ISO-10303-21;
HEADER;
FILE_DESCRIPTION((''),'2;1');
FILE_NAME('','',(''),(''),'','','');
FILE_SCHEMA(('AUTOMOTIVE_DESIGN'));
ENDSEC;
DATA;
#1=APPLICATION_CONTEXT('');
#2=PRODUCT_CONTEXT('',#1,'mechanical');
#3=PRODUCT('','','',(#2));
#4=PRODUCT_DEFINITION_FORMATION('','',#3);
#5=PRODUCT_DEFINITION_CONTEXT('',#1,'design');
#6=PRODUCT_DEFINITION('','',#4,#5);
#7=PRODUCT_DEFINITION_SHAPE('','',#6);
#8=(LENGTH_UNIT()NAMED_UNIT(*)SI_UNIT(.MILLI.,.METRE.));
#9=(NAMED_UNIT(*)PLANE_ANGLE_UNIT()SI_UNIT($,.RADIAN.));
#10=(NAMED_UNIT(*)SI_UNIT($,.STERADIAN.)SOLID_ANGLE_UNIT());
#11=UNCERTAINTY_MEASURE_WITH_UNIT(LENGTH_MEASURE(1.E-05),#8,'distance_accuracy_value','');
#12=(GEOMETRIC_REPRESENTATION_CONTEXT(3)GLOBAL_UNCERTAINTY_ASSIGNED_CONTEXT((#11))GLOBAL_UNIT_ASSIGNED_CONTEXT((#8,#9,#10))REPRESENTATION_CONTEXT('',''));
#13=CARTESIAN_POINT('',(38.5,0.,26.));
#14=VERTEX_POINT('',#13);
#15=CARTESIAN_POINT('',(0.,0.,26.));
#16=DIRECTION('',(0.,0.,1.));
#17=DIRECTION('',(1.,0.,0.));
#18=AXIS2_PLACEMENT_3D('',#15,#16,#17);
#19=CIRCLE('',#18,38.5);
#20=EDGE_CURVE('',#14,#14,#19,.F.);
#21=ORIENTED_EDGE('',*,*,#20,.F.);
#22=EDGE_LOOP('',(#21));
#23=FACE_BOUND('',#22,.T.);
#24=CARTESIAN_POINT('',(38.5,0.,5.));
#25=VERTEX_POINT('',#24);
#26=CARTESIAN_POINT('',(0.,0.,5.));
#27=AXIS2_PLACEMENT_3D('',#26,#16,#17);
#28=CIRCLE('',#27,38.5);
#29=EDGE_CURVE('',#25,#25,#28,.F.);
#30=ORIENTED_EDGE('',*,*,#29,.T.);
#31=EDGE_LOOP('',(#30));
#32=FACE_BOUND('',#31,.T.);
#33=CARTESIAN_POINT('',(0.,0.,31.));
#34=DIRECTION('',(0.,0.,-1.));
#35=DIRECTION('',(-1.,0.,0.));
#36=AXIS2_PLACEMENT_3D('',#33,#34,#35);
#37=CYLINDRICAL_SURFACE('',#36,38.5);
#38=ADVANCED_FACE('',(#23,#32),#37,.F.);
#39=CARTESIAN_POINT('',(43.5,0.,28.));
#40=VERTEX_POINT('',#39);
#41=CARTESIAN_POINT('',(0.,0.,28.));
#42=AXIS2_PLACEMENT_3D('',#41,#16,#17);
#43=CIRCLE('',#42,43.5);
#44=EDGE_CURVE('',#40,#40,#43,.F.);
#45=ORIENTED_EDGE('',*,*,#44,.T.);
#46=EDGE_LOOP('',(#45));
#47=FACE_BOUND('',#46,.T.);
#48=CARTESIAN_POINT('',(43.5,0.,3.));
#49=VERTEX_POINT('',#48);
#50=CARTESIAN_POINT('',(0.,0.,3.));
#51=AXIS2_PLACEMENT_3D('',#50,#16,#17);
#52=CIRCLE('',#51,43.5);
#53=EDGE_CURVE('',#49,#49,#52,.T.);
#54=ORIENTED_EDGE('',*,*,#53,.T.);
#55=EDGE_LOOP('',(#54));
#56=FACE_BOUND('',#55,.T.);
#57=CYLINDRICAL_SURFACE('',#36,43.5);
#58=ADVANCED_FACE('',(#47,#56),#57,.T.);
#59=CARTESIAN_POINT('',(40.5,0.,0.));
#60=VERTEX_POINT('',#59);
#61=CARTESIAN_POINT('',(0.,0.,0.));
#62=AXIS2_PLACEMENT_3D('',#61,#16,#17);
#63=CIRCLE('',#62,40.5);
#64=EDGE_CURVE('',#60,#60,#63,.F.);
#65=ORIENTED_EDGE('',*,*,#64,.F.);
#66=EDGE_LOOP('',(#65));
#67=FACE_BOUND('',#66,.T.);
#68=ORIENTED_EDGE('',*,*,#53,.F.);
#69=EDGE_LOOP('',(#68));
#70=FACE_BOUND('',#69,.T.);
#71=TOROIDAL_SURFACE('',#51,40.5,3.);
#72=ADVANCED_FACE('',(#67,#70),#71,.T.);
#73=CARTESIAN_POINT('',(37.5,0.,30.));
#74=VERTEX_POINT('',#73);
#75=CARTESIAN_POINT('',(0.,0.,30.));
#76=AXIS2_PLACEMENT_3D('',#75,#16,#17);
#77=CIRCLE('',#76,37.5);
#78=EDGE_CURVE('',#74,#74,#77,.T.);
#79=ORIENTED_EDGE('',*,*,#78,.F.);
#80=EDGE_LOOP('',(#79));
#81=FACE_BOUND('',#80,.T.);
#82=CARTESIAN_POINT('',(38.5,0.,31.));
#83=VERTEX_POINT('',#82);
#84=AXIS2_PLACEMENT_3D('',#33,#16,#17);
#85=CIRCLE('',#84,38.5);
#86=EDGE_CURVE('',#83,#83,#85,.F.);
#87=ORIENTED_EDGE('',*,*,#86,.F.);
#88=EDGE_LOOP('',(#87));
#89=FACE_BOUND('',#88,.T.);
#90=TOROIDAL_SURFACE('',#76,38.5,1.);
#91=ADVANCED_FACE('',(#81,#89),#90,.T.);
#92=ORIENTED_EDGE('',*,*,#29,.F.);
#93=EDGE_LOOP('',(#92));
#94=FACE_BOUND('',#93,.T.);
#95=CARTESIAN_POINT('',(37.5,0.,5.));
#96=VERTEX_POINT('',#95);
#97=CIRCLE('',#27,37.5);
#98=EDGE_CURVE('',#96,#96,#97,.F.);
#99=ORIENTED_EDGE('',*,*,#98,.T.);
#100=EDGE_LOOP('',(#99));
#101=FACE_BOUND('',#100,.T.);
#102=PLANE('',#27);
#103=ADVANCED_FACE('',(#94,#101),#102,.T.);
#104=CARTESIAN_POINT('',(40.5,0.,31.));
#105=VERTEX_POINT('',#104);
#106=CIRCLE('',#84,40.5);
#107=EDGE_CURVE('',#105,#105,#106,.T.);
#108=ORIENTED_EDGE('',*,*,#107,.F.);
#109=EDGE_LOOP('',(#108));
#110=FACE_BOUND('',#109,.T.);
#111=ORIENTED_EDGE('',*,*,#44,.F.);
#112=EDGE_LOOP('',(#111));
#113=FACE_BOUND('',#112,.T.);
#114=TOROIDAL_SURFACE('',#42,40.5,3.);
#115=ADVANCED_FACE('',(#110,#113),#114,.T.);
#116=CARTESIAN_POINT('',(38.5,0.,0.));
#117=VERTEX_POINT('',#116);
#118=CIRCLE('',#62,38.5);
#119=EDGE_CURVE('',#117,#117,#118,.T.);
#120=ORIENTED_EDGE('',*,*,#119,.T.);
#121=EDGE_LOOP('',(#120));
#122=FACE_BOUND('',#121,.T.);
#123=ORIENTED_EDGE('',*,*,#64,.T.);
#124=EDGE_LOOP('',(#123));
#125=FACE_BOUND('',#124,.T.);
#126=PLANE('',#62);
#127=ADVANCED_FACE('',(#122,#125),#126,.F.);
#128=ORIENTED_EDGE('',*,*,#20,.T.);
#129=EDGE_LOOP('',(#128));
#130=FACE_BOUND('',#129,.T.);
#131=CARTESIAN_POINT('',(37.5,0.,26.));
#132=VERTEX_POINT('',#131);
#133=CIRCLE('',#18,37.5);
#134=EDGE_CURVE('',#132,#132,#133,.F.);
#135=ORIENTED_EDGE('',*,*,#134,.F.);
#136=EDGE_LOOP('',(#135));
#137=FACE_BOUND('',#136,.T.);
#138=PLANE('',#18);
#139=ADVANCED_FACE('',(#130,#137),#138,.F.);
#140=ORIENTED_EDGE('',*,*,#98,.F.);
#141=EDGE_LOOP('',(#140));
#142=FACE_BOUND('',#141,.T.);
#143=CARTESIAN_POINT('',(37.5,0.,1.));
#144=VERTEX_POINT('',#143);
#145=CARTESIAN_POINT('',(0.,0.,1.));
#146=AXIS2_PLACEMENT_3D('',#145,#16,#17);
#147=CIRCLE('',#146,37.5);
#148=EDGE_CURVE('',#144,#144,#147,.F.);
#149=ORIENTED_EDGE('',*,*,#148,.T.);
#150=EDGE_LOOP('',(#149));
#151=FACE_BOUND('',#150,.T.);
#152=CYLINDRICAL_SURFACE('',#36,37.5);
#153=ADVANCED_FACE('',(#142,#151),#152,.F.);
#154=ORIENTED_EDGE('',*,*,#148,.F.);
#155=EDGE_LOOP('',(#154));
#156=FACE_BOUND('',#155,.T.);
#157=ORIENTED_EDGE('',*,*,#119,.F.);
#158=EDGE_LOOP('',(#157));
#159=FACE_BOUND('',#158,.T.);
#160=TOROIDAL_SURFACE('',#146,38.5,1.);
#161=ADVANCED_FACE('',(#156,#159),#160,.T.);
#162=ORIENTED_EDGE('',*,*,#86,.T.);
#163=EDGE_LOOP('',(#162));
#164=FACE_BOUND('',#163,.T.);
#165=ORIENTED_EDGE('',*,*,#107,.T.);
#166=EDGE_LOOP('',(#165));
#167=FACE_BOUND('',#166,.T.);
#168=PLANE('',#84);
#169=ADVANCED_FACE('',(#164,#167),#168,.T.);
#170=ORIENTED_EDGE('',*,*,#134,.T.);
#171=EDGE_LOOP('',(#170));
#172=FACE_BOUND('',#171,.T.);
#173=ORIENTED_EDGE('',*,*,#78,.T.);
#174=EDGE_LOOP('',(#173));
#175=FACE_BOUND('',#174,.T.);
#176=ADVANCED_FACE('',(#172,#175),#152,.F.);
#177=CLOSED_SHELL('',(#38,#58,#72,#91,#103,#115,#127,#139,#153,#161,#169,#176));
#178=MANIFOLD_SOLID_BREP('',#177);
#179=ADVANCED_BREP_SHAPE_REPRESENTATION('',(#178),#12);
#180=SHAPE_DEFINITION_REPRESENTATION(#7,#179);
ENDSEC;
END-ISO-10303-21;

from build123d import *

# Parameters (mm, degrees)
SKETCH1_R           = 43.5
SKETCH1_R_2         = 37.5
EXTRUDE_THIN3_DEPTH = 31
FILLET5_R           = 3
FILLET6_R           = 1
SHELL4_START        = 5
SHELL4_OUTLINE_R    = 38.5
SHELL4_OUTLINE_R_2  = 37.5
SHELL4_DEPTH        = 21


# Read off the part's stored shape, not the designer's step: Shell4
with BuildPart() as part:
    # Sketch1 → Extrude-Thin3 (new body)
    with BuildSketch(Plane.XY):
        Circle(SKETCH1_R)
        Circle(SKETCH1_R_2, mode=Mode.SUBTRACT)
    extrude(amount=EXTRUDE_THIN3_DEPTH)

    # Fillet5
    fillet5_edges = [part.edges().sort_by_distance(p)[0] for p in [
        (-43.5, 0, 0),
        (-43.5, 0, 31),
    ]]
    fillet(fillet5_edges, radius=FILLET5_R)

    # Fillet6
    fillet6_edges = [part.edges().sort_by_distance(p)[0] for p in [
        (-37.5, 0, 0),
        (-37.5, 0, 31),
    ]]
    fillet(fillet6_edges, radius=FILLET6_R)

    # Shell4 outline → Shell4 (cut)
    with BuildSketch(Plane.XY.offset(SHELL4_START)):
        Circle(SHELL4_OUTLINE_R)
        Circle(SHELL4_OUTLINE_R_2, mode=Mode.SUBTRACT)
    extrude(amount=SHELL4_DEPTH, mode=Mode.SUBTRACT)


solid = part.part
